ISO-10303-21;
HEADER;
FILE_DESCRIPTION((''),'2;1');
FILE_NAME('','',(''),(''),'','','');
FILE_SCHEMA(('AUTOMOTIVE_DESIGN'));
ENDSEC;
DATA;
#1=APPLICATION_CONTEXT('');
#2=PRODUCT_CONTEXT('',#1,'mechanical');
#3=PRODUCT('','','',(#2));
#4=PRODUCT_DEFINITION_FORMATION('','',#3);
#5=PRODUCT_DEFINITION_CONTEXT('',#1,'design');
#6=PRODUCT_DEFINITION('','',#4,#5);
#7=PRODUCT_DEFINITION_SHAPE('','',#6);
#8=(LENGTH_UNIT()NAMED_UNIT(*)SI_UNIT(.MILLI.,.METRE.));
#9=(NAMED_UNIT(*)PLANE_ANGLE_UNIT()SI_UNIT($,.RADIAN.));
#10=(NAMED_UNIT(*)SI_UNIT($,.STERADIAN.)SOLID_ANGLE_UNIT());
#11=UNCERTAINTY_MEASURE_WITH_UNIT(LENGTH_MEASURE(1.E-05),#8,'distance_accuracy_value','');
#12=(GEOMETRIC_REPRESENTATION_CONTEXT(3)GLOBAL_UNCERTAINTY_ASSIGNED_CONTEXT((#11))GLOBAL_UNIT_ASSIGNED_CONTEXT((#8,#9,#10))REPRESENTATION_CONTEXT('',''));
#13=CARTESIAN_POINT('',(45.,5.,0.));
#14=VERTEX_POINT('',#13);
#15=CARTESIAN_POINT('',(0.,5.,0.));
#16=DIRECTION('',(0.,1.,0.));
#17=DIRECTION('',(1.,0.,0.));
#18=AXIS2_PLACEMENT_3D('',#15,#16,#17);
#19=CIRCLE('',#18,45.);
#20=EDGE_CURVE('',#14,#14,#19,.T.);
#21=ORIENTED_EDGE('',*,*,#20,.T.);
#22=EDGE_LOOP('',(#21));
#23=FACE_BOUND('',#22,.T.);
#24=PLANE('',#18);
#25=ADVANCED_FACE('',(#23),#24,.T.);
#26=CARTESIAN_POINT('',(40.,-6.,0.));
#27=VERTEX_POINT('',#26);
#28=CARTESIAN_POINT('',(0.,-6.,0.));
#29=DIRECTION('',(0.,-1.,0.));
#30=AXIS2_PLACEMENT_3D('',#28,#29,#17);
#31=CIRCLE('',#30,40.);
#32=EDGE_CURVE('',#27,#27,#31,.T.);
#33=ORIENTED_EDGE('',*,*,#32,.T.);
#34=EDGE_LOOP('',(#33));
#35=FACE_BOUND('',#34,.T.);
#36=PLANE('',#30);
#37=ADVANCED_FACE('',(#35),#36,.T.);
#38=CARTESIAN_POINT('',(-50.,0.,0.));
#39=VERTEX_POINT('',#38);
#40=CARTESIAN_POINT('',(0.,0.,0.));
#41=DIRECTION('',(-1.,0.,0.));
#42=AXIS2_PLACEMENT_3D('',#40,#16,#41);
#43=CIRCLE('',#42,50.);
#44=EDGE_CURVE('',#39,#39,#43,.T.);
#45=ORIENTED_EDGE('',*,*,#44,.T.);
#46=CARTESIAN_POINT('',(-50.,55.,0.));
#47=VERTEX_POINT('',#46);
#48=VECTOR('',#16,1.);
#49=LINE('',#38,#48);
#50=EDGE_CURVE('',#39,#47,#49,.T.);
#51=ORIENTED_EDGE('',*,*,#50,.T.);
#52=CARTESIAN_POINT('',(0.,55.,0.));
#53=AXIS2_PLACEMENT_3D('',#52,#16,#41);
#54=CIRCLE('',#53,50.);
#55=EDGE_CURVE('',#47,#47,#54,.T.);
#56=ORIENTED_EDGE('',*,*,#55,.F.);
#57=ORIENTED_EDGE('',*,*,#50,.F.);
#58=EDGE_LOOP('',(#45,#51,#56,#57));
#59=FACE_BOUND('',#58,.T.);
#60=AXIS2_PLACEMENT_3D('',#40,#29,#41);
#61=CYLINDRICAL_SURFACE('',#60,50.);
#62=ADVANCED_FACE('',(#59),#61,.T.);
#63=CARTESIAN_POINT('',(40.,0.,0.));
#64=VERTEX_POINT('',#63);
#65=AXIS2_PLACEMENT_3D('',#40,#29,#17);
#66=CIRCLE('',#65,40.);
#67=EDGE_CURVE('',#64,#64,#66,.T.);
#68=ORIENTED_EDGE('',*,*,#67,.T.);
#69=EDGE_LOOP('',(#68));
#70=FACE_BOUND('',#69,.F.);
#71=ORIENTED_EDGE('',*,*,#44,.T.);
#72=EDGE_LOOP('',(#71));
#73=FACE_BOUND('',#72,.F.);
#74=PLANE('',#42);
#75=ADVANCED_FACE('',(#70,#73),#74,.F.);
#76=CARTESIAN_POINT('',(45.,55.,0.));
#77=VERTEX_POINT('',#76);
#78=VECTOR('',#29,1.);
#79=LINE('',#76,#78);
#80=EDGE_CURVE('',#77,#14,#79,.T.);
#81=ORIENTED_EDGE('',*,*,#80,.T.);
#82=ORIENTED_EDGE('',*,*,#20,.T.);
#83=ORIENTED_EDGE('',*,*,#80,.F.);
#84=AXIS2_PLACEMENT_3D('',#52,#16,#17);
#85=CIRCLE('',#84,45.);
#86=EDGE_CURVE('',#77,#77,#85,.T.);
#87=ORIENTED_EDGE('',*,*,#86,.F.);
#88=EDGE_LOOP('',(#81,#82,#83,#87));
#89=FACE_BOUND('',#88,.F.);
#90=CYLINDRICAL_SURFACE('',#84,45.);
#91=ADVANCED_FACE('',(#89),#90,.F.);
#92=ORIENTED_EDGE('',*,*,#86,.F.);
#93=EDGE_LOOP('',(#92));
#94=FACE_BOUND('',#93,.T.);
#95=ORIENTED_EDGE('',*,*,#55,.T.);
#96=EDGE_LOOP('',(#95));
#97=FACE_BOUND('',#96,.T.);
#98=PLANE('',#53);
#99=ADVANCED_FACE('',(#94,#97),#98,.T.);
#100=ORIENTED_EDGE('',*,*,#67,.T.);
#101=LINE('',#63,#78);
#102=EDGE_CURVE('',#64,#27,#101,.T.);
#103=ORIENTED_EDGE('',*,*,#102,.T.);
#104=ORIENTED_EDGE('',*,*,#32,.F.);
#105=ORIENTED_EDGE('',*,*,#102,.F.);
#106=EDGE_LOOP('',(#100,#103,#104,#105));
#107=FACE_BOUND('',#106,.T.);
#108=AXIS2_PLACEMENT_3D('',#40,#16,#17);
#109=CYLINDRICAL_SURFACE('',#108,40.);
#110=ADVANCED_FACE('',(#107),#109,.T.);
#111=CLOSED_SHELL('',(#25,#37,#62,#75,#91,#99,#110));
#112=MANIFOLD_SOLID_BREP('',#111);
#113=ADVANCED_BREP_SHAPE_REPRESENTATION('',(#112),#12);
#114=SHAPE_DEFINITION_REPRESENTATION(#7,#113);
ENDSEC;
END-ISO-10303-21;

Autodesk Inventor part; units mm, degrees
ref_plane "YZ Plane" through (0, 0, 0) normal (1, 0, 0) x (0, 1, 0)
ref_plane "XZ Plane" through (0, 0, 0) normal (0, 1, 0) x (-1, 0, 0)
ref_plane "XY Plane" through (0, 0, 0) normal (0, 0, 1) x (1, 0, 0)
sketch "Boceto1" plane through (0, 0, 0) normal (0, 1, 0) x (-1, 0, 0)
  circle A0 centre (0, 0) radius 50
  dimension "d0" = 100
extrude "Extrusión1" add sketch "Boceto1" along normal blind 55
sketch "Boceto2" plane through (0, 55, 0) normal (0, 1, 0) x (1, 0, 0)
  circle A0 centre (0, 0) radius 45
  dimension "d3" = 90
extrude "Extrusión2" cut sketch "Boceto2" against normal blind 50
thread "Rosca1" size "M80x1.5" class "6H" standard "ANSI Metric M Profile" length 6
sketch "Boceto3" plane through (0, 0, 0) normal (0, -1, 0) x (1, 0, 0)
  circle A0 centre (0, 0) radius 40
  dimension "d8" = 80
extrude "Extrusión3" add sketch "Boceto3" along normal blind 6
thread "Rosca2" size "M80x1.5" class "6g" standard "ANSI Metric M Profile" length 6
